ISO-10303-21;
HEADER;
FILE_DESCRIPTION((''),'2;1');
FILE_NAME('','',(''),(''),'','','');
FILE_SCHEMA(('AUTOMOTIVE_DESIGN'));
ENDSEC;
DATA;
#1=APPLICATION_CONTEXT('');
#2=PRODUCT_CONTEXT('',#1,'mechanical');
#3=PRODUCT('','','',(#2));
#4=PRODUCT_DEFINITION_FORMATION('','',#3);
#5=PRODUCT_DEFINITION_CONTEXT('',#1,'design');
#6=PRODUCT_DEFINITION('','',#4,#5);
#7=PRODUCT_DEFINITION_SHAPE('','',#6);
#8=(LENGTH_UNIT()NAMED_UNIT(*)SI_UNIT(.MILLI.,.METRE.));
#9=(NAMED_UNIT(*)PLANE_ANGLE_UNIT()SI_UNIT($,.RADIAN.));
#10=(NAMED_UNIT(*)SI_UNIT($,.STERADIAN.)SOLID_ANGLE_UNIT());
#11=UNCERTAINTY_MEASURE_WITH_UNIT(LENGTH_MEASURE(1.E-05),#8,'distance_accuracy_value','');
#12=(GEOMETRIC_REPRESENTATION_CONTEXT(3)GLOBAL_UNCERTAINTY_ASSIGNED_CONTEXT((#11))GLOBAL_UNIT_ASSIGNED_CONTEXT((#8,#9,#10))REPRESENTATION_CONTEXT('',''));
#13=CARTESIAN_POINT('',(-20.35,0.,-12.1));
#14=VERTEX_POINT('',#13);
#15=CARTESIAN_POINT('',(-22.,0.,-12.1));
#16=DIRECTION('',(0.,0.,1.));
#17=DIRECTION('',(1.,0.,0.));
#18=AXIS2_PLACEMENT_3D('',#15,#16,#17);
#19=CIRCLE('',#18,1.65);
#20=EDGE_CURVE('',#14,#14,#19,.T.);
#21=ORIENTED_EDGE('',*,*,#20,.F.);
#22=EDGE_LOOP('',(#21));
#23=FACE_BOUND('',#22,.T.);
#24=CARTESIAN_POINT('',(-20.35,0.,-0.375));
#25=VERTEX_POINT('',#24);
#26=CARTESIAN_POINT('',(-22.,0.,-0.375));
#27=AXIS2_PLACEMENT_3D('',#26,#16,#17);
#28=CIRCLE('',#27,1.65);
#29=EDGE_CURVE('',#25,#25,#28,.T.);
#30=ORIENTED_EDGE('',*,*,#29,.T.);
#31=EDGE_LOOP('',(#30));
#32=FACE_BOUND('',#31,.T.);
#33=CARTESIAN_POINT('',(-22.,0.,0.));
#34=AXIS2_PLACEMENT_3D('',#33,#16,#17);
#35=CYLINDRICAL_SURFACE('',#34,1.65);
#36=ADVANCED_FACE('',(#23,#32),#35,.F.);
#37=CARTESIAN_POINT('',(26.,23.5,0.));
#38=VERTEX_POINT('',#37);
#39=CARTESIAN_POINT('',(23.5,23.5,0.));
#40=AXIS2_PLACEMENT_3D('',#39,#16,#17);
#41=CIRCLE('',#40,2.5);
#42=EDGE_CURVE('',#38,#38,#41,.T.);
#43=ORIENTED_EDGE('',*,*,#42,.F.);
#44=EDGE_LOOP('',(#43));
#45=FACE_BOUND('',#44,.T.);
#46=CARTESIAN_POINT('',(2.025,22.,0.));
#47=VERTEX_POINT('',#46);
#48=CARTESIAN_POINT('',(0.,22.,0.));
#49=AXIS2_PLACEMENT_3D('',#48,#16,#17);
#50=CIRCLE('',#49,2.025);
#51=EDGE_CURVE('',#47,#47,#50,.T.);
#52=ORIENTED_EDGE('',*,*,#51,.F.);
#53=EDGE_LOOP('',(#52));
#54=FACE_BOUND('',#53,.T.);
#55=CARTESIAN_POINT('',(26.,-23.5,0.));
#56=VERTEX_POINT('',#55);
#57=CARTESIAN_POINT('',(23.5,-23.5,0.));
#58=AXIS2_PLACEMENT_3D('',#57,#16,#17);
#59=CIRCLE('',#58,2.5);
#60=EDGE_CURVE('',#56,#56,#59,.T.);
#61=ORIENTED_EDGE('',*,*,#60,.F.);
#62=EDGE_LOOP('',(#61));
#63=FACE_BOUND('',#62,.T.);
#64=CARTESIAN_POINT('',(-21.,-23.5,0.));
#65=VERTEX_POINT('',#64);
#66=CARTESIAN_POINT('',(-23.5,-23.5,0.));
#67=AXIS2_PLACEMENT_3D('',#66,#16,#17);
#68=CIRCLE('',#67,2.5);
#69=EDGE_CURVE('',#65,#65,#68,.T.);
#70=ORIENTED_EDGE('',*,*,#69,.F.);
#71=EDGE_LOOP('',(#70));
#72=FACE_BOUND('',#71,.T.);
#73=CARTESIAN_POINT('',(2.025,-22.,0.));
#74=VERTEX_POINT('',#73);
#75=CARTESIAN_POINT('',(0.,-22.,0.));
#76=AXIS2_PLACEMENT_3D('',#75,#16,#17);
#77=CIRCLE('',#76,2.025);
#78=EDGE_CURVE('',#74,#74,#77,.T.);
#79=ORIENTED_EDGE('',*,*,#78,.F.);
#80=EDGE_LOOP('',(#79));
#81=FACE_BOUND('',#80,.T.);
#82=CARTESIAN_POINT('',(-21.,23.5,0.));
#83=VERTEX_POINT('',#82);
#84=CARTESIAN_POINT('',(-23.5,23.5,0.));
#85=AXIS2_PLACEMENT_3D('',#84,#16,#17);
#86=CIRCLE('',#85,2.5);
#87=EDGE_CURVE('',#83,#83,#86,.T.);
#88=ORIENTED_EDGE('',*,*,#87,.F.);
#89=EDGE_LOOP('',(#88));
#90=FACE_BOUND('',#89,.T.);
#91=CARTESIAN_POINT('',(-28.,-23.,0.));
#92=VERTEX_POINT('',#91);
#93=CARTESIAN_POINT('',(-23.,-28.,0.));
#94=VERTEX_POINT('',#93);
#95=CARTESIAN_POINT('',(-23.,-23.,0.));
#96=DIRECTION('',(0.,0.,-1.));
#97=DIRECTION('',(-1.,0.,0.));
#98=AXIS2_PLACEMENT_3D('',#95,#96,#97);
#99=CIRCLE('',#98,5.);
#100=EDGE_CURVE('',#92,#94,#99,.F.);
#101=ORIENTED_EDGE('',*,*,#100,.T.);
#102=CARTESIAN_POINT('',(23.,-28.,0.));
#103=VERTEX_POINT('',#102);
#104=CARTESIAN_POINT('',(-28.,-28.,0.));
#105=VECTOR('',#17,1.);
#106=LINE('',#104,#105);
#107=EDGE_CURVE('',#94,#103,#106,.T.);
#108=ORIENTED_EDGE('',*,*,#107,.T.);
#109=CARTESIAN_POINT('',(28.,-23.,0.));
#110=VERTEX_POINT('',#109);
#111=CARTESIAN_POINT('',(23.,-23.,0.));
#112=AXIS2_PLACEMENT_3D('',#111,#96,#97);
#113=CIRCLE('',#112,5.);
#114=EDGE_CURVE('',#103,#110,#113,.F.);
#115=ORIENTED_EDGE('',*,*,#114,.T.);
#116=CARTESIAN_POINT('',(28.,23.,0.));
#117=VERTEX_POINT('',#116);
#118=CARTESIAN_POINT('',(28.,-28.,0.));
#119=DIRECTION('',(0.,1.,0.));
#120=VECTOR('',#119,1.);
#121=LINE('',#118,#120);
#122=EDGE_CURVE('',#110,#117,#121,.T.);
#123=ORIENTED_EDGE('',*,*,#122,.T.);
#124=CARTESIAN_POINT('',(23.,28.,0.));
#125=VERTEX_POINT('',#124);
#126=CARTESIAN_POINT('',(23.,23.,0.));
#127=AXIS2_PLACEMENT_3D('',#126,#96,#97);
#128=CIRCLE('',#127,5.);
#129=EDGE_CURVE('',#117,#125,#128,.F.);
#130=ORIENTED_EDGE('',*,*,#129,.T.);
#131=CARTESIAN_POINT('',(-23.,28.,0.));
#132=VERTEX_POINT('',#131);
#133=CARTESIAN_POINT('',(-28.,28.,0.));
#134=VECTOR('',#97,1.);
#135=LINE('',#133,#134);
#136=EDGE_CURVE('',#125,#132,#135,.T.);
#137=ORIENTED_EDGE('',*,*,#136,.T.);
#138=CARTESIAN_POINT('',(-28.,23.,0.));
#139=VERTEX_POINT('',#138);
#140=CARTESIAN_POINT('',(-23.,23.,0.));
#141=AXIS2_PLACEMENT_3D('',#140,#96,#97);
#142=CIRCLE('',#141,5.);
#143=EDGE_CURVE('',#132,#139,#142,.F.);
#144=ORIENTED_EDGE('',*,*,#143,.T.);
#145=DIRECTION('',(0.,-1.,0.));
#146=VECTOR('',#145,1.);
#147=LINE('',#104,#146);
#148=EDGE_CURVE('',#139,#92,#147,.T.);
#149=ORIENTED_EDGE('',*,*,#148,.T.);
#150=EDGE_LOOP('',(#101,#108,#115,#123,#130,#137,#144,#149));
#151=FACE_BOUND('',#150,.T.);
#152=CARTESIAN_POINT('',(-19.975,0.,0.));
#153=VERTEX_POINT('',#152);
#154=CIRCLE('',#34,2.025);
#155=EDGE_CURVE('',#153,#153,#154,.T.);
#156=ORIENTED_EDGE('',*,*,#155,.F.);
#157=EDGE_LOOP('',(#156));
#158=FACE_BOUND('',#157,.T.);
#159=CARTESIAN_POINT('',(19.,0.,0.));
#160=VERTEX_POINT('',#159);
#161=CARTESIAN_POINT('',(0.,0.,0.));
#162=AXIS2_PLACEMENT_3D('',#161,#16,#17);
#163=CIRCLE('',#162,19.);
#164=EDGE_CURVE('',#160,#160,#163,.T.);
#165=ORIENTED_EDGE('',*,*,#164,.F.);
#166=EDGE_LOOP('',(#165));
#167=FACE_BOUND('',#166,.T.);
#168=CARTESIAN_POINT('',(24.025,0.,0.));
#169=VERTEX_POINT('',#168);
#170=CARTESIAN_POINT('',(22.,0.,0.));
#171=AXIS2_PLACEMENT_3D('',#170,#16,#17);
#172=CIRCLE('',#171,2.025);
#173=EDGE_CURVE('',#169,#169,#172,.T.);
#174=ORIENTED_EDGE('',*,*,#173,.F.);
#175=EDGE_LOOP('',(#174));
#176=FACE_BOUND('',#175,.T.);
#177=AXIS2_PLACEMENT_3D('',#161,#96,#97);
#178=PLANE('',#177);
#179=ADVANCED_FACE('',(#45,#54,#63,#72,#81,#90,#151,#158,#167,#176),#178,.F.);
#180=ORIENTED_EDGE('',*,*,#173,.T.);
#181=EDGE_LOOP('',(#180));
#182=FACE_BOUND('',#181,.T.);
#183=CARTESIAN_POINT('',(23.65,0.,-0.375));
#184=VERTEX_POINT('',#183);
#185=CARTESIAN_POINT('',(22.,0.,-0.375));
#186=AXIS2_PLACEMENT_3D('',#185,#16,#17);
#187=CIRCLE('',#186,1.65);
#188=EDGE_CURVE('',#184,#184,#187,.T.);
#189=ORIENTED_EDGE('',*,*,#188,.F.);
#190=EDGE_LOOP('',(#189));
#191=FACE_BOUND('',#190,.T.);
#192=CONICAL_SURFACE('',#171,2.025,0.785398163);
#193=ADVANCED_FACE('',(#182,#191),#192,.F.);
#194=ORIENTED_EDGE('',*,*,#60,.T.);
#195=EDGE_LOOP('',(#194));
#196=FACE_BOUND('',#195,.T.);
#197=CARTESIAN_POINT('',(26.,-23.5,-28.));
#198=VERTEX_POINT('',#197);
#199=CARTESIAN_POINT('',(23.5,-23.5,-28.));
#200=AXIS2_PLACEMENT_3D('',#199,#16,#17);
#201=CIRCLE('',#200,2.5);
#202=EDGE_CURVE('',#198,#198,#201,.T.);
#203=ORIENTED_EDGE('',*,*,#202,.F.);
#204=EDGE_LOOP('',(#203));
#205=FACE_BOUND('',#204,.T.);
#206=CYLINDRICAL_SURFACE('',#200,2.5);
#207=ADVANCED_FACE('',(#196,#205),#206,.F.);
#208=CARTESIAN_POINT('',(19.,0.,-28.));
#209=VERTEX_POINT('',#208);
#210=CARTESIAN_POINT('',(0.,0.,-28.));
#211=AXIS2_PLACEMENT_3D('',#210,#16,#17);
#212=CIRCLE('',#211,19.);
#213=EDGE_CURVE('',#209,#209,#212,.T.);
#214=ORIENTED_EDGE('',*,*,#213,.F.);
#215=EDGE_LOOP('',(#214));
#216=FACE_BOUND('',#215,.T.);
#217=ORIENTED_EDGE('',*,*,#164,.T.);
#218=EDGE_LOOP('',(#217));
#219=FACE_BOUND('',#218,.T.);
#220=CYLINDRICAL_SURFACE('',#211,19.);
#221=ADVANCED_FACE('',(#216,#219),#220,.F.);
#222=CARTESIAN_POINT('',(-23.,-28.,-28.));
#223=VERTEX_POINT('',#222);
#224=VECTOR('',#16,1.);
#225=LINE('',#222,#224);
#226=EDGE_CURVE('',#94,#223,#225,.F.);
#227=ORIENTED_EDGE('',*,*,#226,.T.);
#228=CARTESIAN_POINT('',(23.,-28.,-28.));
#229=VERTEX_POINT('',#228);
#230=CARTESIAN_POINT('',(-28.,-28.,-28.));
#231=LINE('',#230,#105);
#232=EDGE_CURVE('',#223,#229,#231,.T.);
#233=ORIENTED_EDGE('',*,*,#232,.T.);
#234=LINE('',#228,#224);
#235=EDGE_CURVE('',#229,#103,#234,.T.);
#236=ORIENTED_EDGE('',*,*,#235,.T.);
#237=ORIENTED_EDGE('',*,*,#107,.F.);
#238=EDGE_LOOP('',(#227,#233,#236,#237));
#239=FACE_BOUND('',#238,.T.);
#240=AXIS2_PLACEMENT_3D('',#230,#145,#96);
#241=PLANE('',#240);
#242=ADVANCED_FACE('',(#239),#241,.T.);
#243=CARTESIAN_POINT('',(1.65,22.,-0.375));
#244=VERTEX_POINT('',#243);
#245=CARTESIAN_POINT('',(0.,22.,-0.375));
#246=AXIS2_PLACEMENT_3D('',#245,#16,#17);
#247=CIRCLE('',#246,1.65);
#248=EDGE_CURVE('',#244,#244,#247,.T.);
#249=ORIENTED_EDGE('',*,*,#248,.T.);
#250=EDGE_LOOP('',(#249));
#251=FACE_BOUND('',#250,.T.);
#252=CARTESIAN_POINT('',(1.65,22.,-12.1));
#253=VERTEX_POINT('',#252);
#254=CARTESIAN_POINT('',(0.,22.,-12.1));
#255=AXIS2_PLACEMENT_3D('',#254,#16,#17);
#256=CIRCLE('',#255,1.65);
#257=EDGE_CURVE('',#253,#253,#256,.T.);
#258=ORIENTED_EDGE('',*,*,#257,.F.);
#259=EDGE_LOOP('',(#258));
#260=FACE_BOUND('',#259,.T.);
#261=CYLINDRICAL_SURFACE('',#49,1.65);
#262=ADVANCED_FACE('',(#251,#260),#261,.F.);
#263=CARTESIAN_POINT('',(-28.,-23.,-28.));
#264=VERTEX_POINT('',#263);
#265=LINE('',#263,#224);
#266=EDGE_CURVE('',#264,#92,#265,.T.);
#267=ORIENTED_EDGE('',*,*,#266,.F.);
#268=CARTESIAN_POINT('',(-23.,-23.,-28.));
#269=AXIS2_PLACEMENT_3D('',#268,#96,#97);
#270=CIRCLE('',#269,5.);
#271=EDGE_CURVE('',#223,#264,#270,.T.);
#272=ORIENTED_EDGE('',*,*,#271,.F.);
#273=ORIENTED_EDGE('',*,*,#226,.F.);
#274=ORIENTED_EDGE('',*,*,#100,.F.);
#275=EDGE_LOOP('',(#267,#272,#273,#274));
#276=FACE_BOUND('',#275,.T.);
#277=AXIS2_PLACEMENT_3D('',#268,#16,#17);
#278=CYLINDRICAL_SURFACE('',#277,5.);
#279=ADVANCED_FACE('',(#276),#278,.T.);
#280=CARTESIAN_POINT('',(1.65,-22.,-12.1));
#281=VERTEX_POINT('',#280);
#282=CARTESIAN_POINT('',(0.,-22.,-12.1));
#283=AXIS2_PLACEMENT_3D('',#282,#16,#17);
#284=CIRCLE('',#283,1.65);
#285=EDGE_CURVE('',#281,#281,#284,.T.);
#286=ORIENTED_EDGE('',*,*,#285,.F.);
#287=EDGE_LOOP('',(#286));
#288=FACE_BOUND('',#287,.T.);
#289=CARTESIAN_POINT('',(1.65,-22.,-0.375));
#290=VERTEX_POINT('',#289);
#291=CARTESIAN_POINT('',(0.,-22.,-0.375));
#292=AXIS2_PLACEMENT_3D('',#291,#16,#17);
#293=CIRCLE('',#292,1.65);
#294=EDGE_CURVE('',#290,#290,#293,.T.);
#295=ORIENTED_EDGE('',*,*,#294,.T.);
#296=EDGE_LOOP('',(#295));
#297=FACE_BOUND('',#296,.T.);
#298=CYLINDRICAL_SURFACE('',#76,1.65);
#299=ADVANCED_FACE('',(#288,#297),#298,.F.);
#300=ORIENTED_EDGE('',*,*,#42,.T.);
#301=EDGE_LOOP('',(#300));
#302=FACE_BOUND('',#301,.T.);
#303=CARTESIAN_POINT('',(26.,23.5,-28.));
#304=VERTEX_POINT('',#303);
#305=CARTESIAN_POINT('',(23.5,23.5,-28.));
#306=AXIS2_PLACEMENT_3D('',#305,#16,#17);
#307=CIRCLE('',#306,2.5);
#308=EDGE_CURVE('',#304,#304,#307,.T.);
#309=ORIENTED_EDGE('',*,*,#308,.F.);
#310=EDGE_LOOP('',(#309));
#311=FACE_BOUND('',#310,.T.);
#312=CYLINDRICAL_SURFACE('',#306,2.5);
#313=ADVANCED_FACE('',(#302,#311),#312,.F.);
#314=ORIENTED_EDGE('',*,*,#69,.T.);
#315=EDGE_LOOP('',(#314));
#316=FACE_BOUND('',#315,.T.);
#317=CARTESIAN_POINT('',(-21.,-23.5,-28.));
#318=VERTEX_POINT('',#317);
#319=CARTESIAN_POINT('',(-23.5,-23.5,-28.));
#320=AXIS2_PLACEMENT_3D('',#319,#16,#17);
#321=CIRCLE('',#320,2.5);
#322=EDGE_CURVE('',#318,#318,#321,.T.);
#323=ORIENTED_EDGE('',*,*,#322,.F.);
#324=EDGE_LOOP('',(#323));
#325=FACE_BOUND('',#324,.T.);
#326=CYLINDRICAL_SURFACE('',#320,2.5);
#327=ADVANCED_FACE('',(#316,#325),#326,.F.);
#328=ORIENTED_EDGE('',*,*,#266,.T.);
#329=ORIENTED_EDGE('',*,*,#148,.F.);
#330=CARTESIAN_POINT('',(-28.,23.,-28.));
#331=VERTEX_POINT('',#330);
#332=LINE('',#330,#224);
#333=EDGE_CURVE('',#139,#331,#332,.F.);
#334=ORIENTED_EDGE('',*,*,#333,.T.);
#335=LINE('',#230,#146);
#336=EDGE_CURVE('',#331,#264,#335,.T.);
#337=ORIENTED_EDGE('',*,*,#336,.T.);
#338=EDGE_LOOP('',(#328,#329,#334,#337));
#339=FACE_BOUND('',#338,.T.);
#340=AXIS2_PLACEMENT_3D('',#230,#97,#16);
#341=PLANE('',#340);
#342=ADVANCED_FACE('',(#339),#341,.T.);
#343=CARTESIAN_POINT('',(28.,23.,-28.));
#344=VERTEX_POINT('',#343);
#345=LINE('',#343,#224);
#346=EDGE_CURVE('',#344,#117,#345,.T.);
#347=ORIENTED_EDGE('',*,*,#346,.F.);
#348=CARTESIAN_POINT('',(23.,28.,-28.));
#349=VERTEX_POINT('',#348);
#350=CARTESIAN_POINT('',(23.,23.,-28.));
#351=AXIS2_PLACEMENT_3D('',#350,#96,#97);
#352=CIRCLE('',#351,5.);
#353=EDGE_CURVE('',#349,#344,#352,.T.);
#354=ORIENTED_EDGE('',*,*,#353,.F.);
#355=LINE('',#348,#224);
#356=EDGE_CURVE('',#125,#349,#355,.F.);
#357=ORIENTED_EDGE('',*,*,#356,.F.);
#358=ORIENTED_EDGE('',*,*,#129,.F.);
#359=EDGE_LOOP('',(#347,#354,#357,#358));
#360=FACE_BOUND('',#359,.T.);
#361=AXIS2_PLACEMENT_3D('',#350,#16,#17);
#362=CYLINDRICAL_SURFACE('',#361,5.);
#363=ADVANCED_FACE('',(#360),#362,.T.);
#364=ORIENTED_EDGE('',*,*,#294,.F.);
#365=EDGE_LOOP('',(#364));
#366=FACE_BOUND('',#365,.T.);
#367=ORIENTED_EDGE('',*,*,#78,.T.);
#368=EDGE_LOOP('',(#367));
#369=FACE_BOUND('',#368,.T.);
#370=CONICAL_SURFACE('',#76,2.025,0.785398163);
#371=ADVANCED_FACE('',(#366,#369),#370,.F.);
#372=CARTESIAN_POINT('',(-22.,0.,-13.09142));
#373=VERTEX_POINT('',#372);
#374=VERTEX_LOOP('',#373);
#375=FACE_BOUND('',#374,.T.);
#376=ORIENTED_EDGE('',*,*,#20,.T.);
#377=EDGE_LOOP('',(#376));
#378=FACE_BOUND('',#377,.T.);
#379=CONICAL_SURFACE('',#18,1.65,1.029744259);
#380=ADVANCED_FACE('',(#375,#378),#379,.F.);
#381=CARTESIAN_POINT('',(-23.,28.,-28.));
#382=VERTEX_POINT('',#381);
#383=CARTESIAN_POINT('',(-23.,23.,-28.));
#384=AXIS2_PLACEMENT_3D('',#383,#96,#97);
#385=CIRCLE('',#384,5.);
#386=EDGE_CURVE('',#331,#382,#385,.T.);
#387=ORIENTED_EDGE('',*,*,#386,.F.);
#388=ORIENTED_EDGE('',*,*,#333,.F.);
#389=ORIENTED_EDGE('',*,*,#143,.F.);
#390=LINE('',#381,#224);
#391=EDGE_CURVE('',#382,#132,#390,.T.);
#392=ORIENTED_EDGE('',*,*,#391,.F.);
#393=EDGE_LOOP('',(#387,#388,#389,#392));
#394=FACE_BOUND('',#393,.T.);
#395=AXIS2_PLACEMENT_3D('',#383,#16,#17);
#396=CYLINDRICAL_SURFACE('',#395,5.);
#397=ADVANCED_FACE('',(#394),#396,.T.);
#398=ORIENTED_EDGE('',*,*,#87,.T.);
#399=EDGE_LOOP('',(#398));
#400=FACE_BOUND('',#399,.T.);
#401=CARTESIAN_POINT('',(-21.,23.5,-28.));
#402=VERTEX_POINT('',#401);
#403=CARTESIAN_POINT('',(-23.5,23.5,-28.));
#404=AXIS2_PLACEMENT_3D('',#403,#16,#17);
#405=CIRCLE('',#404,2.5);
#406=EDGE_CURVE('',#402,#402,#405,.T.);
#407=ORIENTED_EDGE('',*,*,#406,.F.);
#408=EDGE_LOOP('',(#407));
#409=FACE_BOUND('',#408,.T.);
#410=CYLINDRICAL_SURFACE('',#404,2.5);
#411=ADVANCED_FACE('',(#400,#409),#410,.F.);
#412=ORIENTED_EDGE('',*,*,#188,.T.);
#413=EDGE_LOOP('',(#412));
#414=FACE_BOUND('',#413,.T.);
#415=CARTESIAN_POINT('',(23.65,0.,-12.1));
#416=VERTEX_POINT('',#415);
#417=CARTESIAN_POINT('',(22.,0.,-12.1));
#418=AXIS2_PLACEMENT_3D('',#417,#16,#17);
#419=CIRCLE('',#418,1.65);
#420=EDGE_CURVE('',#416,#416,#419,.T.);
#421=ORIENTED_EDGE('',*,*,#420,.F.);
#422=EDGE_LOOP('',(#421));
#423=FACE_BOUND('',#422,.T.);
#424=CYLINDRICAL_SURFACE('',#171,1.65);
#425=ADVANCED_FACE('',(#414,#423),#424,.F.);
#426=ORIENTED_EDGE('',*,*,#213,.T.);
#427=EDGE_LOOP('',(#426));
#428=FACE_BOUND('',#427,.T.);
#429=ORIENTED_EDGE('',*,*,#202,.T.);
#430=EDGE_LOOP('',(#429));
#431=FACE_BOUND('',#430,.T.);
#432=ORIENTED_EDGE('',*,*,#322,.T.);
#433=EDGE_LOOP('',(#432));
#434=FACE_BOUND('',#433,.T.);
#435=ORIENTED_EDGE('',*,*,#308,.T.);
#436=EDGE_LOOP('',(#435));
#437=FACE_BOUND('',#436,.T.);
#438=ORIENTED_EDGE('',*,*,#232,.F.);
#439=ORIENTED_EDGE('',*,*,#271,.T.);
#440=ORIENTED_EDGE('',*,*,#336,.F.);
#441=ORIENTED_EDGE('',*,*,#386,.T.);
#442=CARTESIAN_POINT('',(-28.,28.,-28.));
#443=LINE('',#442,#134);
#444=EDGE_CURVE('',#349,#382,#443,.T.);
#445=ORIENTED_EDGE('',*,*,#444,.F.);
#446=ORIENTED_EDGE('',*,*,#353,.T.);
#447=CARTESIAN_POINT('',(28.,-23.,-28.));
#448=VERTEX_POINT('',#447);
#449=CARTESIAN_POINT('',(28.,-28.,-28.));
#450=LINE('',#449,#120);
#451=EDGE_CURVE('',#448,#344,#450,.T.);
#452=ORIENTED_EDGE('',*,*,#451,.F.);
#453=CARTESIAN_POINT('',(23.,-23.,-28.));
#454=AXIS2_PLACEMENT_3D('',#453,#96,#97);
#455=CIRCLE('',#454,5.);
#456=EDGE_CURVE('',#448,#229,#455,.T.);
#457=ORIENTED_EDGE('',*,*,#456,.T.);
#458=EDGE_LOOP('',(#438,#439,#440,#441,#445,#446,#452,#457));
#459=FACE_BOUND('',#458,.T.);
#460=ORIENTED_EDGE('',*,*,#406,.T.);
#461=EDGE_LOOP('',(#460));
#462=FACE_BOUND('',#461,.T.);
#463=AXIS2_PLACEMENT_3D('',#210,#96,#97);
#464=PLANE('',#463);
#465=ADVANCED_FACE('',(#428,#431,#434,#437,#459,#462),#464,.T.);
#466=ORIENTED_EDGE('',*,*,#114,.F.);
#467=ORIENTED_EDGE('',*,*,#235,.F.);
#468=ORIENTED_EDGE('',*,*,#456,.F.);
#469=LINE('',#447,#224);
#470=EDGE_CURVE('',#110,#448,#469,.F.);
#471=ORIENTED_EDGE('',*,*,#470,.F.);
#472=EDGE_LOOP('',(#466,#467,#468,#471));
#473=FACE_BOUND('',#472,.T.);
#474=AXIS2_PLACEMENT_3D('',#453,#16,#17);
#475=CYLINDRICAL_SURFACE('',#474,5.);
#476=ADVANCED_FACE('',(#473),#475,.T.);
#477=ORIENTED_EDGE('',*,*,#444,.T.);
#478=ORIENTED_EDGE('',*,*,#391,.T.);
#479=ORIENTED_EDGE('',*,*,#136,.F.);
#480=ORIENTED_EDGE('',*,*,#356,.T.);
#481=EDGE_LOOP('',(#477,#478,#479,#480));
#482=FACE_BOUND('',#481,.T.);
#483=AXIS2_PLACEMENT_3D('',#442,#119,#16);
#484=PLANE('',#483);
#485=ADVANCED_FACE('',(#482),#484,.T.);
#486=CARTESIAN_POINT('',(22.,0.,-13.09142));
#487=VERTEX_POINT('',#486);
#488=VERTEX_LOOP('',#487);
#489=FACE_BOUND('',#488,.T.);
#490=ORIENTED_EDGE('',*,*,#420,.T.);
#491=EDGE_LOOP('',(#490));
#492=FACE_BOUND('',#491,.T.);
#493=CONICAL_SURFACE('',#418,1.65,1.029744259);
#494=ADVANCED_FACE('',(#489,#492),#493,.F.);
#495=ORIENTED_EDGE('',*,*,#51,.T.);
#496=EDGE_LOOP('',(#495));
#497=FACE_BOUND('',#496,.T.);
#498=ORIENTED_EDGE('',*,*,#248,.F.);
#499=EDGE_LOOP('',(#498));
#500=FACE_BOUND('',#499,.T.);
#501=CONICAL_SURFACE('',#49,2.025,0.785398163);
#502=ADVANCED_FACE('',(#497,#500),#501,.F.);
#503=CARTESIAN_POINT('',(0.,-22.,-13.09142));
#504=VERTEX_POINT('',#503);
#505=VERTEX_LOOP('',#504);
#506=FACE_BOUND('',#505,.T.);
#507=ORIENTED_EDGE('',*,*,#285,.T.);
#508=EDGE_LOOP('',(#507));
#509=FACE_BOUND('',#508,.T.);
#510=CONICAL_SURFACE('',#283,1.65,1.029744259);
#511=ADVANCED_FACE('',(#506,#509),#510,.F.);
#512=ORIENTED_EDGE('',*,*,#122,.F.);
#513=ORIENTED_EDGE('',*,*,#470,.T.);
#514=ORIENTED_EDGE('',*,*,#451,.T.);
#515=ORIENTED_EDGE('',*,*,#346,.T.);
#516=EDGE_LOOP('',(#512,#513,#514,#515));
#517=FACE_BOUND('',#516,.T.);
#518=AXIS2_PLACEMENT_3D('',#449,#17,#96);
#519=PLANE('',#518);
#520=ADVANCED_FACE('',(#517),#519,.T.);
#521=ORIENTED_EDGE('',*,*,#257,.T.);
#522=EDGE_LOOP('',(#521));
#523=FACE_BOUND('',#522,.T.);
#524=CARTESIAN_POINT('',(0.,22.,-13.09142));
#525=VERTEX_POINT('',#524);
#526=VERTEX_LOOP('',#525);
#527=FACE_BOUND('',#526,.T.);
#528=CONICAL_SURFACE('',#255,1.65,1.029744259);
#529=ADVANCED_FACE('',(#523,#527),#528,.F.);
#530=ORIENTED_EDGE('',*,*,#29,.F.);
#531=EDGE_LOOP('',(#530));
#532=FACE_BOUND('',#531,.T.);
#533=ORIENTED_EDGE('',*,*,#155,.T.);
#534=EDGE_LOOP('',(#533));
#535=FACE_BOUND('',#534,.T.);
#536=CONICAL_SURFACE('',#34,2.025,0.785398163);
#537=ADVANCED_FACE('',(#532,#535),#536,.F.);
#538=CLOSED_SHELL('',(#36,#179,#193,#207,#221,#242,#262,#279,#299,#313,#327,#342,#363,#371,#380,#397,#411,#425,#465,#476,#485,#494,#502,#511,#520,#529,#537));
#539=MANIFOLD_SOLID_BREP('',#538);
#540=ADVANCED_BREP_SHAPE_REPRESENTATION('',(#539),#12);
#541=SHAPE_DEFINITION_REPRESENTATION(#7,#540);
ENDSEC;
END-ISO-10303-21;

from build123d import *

# Parameters (mm, degrees)
SKETCH1_W                       = 56
SKETCH1_H                       = 56
BASE_FLANGE1_DEPTH              = 28
SKETCH6_R                       = 19
SKETCH6_R_2                     = 2.5
CUT_EXTRUDE1_DEPTH              = 49.497422612
FILLET1_R                       = 5
M4X0_7_TAPPED_HOLE1_D           = 3.3
M4X0_7_TAPPED_HOLE1_DEPTH       = 12.1
M4X0_7_TAPPED_HOLE1_CSINK_D     = 4.05
M4X0_7_TAPPED_HOLE1_CSINK_ANGLE = 90
M4X0_7_TAPPED_HOLE1_TIP         = 0.991420021


# Sheet-metal steps are written as plain solids
with BuildPart() as part:
    # Sketch1 → Base-Flange1 (new body)
    with BuildSketch(Plane.XY):
        Rectangle(SKETCH1_W, SKETCH1_H)
    extrude(amount=-BASE_FLANGE1_DEPTH)

    # Sketch6 → Cut-Extrude1 (cut, through all)
    with BuildSketch(Plane.XY):
        Circle(SKETCH6_R)
        with Locations((-23.5, 23.5)):
            Circle(SKETCH6_R_2)
        with Locations((23.5, 23.5)):
            Circle(SKETCH6_R_2)
        with Locations((23.5, -23.5)):
            Circle(SKETCH6_R_2)
        with Locations((-23.5, -23.5)):
            Circle(SKETCH6_R_2)
    extrude(amount=-CUT_EXTRUDE1_DEPTH, mode=Mode.SUBTRACT)

    # Fillet1
    fillet1_edges = [part.edges().sort_by_distance(p)[0] for p in [
        (28, -28, -14),
        (-28, -28, -14),
        (-28, 28, -14),
        (28, 28, -14),
    ]]
    fillet(fillet1_edges, radius=FILLET1_R)

    # M4x0.7 Tapped Hole1
    with Locations(Plane.XY):
        with Locations((0, 22), (-22, 0), (0, -22), (22, 0)):
            CounterSinkHole(M4X0_7_TAPPED_HOLE1_D / 2, M4X0_7_TAPPED_HOLE1_CSINK_D / 2, depth=M4X0_7_TAPPED_HOLE1_DEPTH, counter_sink_angle=M4X0_7_TAPPED_HOLE1_CSINK_ANGLE)
            with Locations((0, 0, -(M4X0_7_TAPPED_HOLE1_DEPTH + M4X0_7_TAPPED_HOLE1_TIP / 2))):  # 118° drill point
                Cone(0, M4X0_7_TAPPED_HOLE1_D / 2, M4X0_7_TAPPED_HOLE1_TIP, mode=Mode.SUBTRACT)


solid = part.part
